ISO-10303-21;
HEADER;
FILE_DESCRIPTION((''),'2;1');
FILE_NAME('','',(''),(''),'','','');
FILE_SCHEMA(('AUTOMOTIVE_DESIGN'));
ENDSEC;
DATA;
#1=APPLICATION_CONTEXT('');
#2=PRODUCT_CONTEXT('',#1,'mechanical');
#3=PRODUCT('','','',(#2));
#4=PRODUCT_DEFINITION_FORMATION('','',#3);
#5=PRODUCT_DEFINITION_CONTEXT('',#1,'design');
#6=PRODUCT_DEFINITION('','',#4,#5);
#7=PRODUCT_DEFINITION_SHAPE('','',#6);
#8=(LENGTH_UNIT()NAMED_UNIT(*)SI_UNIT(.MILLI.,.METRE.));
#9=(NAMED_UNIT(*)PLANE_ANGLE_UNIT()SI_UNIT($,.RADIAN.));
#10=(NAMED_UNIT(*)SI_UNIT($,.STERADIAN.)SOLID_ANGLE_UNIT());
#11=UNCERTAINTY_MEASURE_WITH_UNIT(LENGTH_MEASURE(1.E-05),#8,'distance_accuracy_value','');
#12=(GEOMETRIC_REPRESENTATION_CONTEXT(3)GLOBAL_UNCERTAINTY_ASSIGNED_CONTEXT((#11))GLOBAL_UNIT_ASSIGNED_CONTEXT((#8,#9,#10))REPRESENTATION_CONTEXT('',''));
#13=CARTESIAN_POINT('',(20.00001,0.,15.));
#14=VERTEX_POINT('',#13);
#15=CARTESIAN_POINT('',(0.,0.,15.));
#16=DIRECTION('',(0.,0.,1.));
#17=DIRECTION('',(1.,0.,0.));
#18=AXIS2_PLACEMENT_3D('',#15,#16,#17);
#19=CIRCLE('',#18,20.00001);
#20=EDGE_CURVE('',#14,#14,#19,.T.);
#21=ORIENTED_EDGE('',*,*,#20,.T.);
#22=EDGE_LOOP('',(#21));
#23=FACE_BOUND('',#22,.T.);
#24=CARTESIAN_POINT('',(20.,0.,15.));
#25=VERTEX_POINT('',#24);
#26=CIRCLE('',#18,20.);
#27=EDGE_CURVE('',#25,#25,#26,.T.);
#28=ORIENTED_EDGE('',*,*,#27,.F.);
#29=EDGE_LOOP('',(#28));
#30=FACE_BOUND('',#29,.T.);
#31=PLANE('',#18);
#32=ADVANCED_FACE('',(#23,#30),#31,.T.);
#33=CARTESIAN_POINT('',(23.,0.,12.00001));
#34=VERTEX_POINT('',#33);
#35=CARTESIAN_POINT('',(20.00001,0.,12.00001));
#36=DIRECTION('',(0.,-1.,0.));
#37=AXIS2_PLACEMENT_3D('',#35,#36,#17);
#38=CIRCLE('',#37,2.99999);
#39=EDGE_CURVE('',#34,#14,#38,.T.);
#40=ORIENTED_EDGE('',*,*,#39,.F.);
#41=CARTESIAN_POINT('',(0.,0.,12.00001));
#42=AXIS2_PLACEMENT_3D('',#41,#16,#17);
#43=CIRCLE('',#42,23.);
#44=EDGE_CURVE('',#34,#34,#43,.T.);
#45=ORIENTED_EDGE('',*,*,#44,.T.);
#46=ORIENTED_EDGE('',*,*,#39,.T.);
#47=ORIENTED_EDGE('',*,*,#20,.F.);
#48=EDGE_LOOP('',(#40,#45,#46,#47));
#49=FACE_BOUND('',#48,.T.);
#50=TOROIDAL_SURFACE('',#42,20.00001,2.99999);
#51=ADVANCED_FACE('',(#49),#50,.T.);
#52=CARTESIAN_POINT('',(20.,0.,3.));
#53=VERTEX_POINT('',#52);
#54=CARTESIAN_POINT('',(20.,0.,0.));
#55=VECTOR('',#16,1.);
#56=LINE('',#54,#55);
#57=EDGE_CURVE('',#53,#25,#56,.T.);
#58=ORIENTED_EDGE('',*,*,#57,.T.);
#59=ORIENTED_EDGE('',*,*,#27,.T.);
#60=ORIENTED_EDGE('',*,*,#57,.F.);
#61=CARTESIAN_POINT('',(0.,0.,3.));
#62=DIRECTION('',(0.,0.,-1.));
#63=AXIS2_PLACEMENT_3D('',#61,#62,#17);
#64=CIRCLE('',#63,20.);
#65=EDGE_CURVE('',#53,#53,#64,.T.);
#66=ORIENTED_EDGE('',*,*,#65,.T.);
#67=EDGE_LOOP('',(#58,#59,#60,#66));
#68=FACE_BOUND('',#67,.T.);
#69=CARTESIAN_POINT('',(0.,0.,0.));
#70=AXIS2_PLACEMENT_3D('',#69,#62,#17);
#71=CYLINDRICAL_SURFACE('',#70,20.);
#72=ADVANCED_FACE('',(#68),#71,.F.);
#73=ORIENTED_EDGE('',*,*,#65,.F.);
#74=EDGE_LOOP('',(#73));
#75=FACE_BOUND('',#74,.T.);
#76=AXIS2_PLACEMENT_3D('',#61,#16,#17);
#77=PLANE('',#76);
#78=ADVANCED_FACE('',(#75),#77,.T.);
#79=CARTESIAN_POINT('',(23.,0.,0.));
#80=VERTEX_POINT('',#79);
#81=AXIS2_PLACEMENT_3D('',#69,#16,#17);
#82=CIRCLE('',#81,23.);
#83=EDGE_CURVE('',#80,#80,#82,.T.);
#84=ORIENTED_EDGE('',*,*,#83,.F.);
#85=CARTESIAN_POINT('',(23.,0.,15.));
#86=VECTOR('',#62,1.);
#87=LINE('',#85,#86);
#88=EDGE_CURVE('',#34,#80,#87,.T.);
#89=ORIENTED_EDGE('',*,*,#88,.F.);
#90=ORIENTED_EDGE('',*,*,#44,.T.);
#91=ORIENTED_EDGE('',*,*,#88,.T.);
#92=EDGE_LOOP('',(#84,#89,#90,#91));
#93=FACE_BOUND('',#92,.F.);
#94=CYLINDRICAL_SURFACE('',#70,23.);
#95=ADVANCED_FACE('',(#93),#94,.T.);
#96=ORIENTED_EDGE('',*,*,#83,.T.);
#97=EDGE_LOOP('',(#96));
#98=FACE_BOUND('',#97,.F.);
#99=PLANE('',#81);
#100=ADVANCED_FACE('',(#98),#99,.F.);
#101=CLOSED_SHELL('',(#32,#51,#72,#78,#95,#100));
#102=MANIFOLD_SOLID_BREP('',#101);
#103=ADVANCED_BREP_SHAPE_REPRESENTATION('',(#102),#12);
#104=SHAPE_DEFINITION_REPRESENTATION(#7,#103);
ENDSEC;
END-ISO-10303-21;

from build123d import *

# Parameters (mm, degrees)
F0_R     = 23
F0_R_2   = 20
F1_DEPTH = 15
F2_R     = 23
F3_DEPTH = 3
F4_R     = 2.99999


# Not quite as in the source:
# - a fillet or chamfer is up to 0.001 mm smaller than in the source, because OpenCascade refuses the exact size


with BuildPart() as f1:
    # F0 (on Top) → F1 (new body)
    with BuildSketch(Plane.XY):
        Circle(F0_R)
        Circle(F0_R_2, mode=Mode.SUBTRACT)
    extrude(amount=F1_DEPTH)

    # F2 (on Top) → F3 (join)
    with BuildSketch(Plane.XY):
        Circle(F2_R)
    extrude(amount=F3_DEPTH)

    # F4 (radius 3 in the source; OpenCascade refuses exactly that, so slightly less here)
    f4_edges = [f1.edges().sort_by_distance(p)[0] for p in [
        (-23, 0, 15),
    ]]
    fillet(f4_edges, radius=F4_R)


solid = f1.part
